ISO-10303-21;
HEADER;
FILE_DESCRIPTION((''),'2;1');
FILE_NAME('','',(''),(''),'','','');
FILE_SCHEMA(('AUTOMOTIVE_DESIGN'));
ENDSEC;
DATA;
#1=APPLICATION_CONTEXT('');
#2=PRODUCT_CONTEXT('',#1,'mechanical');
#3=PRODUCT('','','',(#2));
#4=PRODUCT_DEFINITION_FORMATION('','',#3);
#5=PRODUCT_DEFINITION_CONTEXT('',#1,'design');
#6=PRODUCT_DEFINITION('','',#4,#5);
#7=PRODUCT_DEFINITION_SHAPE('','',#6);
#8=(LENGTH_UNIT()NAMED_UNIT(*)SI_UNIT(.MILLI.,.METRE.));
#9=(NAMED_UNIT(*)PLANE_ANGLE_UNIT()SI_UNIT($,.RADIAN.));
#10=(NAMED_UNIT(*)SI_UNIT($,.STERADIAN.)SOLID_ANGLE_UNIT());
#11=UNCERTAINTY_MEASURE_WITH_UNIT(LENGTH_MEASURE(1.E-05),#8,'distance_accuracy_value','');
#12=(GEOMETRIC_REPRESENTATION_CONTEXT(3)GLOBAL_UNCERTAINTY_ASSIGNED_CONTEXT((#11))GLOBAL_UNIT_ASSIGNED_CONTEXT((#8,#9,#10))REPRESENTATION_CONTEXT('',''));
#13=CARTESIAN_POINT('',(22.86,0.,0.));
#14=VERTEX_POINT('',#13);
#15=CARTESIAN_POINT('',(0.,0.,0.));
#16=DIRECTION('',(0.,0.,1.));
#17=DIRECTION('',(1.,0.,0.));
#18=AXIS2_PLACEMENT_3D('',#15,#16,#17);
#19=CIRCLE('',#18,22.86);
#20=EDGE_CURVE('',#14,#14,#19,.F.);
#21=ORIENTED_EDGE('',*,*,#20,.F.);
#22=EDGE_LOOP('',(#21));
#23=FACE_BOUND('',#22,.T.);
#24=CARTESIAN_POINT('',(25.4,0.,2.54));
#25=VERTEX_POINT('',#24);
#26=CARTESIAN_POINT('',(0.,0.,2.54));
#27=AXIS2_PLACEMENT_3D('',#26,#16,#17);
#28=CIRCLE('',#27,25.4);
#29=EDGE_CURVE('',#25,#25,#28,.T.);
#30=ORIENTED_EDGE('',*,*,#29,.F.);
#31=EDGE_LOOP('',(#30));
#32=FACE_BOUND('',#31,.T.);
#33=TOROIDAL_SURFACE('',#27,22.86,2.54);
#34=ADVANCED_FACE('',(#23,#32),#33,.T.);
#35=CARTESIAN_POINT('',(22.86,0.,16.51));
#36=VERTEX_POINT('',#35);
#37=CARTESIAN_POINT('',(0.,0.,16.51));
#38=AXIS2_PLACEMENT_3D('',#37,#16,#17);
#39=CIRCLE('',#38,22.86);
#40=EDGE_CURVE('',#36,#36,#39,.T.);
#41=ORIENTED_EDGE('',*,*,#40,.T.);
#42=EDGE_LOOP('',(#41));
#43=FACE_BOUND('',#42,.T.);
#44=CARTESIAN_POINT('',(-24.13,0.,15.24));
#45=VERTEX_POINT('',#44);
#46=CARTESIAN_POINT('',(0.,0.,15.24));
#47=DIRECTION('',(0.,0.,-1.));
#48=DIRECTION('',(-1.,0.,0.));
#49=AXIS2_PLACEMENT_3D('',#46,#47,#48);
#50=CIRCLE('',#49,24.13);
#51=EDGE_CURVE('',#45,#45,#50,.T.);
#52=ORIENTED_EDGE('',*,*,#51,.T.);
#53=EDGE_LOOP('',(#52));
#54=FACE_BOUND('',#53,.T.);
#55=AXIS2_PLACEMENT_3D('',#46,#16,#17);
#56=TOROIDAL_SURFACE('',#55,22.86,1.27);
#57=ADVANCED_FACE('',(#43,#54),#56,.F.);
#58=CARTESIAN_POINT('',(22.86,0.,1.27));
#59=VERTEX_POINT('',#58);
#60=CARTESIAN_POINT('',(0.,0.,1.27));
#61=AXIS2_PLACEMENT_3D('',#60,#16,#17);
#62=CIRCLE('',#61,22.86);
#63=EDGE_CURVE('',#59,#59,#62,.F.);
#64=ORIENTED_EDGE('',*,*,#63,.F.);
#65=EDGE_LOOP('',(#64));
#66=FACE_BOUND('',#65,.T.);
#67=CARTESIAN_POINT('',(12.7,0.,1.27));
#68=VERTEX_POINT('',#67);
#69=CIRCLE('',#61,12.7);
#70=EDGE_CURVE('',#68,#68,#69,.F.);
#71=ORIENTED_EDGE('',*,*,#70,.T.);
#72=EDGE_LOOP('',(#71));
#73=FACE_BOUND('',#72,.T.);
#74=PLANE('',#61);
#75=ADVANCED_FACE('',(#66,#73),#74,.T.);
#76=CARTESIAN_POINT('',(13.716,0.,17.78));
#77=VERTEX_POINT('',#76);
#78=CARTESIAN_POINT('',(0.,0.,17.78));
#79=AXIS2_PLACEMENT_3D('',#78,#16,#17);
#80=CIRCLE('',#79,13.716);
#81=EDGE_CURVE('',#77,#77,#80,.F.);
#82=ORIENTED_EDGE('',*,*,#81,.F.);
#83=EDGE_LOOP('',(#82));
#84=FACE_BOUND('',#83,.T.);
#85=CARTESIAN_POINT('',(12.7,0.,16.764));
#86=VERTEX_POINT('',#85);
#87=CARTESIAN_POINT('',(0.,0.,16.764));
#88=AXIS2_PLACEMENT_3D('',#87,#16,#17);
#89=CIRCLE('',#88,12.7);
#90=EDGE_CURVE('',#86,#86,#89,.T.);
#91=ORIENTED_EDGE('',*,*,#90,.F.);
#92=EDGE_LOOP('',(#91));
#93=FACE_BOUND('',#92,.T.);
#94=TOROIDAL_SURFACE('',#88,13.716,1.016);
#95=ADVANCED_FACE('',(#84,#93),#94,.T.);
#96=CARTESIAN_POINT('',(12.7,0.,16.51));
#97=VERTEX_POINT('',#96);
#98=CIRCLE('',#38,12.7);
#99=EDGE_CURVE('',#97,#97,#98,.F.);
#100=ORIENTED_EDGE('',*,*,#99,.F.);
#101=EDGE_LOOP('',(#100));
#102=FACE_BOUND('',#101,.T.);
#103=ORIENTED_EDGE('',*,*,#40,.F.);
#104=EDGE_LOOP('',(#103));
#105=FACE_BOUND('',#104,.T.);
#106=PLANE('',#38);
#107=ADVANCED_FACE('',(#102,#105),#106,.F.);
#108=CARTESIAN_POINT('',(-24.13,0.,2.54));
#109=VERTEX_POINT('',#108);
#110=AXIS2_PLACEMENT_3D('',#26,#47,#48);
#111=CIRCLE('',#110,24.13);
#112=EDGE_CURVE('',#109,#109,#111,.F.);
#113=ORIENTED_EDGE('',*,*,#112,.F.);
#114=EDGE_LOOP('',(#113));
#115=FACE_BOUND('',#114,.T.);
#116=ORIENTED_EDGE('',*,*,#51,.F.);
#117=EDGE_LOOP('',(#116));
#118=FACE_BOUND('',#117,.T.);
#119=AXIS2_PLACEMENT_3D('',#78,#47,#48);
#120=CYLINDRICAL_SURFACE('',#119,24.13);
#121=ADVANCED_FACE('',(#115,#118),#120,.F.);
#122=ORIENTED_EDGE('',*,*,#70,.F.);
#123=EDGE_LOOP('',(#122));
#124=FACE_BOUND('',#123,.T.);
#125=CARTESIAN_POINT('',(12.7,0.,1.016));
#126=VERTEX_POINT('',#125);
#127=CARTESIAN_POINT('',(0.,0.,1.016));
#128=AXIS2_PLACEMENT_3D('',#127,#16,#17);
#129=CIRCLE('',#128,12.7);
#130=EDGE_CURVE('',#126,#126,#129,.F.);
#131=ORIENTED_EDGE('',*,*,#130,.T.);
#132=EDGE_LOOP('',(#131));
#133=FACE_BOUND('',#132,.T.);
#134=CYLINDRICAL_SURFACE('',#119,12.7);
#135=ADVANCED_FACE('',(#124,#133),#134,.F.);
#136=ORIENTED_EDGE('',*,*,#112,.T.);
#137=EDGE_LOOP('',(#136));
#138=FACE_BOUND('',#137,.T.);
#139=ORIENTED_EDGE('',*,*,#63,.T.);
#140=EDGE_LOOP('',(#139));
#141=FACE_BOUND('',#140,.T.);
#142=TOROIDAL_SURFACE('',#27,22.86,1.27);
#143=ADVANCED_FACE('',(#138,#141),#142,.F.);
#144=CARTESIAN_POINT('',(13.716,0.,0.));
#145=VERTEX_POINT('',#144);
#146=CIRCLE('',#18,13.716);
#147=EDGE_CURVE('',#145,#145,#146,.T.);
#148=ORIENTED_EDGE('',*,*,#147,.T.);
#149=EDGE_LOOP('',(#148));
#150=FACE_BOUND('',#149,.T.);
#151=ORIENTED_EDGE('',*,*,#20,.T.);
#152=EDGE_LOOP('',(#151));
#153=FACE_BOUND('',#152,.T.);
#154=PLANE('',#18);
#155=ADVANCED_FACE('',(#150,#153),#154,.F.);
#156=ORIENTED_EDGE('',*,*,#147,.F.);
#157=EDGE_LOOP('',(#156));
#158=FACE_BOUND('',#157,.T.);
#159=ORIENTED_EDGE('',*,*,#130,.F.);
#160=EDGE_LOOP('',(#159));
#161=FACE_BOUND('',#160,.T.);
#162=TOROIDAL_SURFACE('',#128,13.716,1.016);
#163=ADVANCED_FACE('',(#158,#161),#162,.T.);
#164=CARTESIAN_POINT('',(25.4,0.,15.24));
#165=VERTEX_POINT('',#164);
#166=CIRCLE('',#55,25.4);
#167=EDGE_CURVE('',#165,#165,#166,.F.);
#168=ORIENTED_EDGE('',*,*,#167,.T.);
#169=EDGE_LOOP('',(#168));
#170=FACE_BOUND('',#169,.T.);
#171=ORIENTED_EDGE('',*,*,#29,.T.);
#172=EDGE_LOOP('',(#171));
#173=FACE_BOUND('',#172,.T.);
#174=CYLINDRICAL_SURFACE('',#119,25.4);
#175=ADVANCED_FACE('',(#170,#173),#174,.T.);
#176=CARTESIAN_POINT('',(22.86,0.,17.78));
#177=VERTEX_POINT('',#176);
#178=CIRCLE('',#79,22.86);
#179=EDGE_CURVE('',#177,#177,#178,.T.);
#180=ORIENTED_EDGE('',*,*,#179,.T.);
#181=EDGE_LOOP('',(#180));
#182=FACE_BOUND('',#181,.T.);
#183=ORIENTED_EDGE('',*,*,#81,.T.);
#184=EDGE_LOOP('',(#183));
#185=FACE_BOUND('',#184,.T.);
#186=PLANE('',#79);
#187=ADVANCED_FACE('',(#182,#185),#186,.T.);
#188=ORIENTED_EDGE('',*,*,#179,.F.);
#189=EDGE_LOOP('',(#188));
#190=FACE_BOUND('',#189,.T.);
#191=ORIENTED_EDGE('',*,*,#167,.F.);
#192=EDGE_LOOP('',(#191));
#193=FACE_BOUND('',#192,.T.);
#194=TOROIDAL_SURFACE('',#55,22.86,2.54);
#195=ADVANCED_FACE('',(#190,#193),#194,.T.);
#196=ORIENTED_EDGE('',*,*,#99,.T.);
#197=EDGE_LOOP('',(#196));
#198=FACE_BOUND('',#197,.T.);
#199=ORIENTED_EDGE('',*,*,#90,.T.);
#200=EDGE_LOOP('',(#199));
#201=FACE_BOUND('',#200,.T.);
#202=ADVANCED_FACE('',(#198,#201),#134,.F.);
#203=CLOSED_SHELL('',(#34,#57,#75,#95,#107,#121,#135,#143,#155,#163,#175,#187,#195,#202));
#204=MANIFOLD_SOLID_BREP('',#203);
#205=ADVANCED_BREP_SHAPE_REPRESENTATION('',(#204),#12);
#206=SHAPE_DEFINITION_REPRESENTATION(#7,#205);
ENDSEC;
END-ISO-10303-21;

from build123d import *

# Parameters (mm, degrees)
SKETCH3_R           = 25.4
SKETCH3_R_2         = 12.7
EXTRUDE_THIN1_DEPTH = 17.78
FILLET1_R           = 2.54
FILLET2_R           = 1.016


# Read off the part's stored shape, not the designer's step: Shell1
with BuildPart() as part:
    # Sketch3 → Extrude-Thin1 (new body)
    with BuildSketch(Plane.XY):
        Circle(SKETCH3_R)
        Circle(SKETCH3_R_2, mode=Mode.SUBTRACT)
    extrude(amount=EXTRUDE_THIN1_DEPTH)

    # Fillet1
    fillet1_edges = [part.edges().sort_by_distance(p)[0] for p in [
        (-25.4, 0, 0),
        (-25.4, 0, 17.78),
    ]]
    fillet(fillet1_edges, radius=FILLET1_R)

    # Fillet2
    fillet2_edges = [part.edges().sort_by_distance(p)[0] for p in [
        (-12.7, 0, 0),
        (-12.7, 0, 17.78),
    ]]
    fillet(fillet2_edges, radius=FILLET2_R)

    # Shell1 outline → Shell1 (revolve, cut)
    with BuildSketch(Plane.XZ):
        with BuildLine():
            Line((22.86, 16.51), (12.7, 16.51))
            Line((12.7, 16.51), (12.7, 1.27))
            Line((12.7, 1.27), (22.86, 1.27))
            ThreePointArc((22.86, 1.27), (23.758025612, 1.641974388), (24.13, 2.54))
            Line((24.13, 2.54), (24.13, 15.24))
            ThreePointArc((24.13, 15.24), (23.758025612, 16.138025612), (22.86, 16.51))
        make_face()
    revolve(axis=Axis((0, 0, 0), (0, 0, 1)), mode=Mode.SUBTRACT)


solid = part.part
